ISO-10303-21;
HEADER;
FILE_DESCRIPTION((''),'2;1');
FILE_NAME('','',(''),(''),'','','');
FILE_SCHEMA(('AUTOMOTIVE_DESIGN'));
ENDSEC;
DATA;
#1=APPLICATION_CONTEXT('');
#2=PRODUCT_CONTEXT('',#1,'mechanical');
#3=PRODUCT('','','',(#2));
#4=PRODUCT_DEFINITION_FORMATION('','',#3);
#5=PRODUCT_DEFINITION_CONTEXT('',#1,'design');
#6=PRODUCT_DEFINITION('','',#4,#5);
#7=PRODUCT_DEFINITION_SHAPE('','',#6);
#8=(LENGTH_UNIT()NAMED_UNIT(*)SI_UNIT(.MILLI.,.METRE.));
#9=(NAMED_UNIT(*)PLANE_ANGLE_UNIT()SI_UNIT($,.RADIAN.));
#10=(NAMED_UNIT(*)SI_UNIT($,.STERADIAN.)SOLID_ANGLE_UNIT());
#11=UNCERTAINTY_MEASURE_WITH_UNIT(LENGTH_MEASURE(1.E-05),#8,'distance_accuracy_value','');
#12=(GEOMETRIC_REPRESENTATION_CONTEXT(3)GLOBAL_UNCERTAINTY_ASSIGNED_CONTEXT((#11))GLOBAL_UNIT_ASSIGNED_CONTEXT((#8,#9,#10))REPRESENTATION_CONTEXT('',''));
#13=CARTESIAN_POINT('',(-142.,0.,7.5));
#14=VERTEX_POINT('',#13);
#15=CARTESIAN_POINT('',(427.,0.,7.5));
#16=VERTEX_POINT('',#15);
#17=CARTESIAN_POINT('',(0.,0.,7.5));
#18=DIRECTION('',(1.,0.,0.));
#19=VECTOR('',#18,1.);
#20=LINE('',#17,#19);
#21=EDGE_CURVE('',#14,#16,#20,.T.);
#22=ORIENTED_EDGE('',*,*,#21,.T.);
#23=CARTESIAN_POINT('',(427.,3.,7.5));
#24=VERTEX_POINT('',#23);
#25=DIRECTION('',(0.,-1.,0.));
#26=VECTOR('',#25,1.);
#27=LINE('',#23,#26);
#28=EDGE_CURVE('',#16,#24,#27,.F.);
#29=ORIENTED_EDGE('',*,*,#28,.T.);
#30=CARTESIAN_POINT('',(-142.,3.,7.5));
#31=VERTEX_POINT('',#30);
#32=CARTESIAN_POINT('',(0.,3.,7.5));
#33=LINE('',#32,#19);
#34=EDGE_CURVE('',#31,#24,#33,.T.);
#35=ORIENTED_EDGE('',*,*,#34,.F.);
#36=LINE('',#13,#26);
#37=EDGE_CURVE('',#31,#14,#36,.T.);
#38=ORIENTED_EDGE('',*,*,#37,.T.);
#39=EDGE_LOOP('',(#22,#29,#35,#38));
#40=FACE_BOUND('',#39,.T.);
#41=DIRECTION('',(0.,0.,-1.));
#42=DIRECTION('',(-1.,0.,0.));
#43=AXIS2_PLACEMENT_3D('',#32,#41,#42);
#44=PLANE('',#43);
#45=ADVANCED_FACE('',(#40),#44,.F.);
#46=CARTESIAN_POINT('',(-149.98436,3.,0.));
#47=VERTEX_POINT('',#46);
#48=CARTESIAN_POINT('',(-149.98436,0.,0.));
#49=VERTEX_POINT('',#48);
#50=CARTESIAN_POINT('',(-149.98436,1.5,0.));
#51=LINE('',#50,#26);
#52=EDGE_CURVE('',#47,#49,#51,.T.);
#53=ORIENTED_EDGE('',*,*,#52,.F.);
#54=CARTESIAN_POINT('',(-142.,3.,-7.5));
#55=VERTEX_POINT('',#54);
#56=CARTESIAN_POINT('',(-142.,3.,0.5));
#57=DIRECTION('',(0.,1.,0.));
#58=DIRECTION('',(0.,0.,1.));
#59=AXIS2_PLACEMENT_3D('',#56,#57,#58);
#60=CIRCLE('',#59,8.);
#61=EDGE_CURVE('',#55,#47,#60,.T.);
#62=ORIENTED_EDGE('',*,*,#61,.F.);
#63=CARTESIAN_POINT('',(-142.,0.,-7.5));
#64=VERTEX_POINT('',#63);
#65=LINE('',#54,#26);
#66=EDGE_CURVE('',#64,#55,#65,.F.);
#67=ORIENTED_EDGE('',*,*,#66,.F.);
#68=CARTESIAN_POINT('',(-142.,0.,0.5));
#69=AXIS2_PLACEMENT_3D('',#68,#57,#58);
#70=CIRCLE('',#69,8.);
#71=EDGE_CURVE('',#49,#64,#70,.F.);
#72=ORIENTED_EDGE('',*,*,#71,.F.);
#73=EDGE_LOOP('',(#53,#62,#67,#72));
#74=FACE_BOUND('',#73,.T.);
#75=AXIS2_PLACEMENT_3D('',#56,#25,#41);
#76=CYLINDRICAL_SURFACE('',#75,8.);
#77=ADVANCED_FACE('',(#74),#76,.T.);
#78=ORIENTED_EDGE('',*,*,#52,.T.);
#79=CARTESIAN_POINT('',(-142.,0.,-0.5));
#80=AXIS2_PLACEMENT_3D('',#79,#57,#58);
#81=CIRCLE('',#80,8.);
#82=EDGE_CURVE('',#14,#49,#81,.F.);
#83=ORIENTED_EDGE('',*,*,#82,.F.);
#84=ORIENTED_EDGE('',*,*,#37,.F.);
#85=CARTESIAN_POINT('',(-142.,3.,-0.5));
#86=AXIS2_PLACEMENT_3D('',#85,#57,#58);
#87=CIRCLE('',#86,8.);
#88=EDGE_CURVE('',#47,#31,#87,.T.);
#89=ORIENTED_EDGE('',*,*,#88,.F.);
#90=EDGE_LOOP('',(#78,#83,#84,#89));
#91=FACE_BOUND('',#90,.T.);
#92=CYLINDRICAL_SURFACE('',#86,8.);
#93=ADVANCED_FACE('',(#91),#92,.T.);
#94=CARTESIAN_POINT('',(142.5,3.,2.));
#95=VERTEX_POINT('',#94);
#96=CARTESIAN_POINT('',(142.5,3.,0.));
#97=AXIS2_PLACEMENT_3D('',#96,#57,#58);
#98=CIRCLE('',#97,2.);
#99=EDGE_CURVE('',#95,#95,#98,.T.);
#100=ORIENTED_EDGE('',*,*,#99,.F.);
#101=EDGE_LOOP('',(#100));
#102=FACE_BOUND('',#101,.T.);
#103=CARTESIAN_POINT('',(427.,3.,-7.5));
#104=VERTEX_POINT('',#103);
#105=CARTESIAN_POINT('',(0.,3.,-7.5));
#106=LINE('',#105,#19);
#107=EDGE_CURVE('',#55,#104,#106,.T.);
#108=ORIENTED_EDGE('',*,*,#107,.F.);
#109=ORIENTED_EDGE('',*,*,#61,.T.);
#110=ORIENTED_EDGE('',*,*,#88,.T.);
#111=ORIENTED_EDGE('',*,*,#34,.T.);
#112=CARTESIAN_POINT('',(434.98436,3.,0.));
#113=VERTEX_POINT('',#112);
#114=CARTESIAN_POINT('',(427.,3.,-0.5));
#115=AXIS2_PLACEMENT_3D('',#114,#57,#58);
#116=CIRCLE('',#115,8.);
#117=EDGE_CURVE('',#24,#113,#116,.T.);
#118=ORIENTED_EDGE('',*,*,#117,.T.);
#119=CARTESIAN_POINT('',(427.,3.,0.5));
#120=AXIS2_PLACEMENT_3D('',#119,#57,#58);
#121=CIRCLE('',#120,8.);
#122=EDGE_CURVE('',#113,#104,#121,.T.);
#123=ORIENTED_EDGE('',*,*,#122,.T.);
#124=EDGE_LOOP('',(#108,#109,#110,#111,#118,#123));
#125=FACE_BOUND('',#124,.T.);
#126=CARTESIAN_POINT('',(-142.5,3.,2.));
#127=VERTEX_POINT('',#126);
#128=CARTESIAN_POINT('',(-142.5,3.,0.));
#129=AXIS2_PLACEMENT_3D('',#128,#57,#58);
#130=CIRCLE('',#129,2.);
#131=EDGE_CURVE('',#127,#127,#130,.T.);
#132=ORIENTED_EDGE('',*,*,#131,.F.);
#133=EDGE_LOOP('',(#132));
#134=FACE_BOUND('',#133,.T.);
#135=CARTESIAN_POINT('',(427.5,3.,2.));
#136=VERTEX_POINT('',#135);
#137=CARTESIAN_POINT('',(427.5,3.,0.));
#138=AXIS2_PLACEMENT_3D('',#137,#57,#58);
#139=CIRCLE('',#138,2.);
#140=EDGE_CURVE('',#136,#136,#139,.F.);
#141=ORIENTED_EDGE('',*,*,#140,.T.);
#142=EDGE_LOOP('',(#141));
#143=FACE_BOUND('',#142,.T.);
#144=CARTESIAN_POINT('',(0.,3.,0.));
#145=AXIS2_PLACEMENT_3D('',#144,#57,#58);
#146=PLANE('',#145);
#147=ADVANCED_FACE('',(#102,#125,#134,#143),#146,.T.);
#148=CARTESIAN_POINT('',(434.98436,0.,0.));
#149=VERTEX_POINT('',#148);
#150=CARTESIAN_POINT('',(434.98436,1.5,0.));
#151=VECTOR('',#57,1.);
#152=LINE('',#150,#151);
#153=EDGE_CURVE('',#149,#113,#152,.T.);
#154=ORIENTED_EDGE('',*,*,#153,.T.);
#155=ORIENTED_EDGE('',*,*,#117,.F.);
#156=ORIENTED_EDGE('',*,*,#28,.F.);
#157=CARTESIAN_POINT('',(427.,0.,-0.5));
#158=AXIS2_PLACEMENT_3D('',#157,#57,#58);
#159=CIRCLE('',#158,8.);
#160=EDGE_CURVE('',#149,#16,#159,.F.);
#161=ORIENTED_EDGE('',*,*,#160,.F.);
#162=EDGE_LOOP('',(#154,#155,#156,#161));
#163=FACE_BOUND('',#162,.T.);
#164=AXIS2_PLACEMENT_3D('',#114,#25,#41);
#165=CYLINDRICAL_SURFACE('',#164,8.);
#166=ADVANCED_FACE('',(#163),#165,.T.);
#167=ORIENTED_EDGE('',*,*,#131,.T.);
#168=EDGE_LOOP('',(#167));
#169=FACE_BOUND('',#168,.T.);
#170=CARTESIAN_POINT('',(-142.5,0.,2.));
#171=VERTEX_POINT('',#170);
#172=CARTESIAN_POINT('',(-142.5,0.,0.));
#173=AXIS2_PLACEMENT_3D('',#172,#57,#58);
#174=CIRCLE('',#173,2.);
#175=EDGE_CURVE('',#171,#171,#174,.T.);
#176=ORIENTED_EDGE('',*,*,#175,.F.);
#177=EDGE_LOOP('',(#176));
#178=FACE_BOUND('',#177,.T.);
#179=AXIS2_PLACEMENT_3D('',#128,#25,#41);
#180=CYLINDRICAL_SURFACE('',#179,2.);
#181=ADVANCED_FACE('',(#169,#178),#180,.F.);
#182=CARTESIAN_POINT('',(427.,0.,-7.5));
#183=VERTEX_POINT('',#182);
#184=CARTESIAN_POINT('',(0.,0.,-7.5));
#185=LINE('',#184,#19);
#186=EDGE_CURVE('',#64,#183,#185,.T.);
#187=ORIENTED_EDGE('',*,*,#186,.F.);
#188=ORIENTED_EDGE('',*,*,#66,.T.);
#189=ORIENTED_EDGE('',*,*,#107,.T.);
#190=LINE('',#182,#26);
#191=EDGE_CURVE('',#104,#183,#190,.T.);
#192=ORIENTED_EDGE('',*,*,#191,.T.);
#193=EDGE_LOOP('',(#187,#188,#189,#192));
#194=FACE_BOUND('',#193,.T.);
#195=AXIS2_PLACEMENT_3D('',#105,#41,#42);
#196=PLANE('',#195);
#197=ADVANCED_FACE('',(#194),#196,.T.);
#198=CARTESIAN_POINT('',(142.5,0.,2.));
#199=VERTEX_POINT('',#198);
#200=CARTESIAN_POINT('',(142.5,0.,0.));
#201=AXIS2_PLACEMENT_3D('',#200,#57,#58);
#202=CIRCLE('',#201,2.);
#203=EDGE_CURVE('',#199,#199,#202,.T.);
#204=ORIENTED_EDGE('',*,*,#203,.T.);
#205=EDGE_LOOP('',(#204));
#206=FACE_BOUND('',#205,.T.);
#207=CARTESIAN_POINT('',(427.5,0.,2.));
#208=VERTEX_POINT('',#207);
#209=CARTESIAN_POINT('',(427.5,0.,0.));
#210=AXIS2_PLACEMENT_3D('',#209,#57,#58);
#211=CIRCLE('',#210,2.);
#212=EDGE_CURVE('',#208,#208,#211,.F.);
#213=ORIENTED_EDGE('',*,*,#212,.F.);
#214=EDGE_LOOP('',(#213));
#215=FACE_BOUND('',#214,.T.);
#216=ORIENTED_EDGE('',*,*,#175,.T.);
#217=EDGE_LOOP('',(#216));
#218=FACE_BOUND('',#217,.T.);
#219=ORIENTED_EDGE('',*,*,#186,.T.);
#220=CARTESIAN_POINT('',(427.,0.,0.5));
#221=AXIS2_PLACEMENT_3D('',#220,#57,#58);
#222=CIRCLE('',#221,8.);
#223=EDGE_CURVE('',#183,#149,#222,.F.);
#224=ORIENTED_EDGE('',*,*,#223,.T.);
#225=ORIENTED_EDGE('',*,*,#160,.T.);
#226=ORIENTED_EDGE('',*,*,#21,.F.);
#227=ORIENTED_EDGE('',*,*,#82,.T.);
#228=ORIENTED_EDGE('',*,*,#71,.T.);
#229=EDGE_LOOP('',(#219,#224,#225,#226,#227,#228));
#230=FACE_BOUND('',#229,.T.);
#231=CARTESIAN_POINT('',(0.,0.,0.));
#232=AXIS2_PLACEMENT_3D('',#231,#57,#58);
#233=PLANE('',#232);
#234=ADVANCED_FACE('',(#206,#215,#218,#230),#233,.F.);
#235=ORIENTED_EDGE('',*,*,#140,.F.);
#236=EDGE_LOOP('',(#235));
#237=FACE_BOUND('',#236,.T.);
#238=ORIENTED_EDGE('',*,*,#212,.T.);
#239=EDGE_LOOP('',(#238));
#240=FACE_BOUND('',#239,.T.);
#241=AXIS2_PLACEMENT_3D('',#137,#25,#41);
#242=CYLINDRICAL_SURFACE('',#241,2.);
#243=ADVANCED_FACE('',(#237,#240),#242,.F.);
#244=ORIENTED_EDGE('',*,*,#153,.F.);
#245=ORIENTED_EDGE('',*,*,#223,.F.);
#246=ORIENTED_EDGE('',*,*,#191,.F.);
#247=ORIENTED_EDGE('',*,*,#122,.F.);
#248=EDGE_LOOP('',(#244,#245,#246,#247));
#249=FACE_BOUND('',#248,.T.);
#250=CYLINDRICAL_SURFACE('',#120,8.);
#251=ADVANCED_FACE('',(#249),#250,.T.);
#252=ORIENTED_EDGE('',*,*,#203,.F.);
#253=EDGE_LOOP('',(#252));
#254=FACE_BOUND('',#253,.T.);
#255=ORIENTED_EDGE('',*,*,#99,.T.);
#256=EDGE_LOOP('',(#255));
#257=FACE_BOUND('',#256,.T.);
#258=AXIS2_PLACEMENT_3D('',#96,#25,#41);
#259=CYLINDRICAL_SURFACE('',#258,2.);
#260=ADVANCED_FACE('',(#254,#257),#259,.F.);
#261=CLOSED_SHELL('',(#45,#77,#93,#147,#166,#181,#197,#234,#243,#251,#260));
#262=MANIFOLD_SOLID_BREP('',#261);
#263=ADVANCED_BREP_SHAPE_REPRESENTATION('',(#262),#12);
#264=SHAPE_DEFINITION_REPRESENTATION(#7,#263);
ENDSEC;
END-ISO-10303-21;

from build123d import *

# Parameters (mm, degrees)
SKETCH1_W           = 285
SKETCH1_H           = 15
SKETCH1_R           = 2
SKETCH1_W_2         = 15
BOSS_EXTRUDE1_DEPTH = 3
FILLET1_R           = 8


with BuildPart() as part:
    # Sketch1 → Boss-Extrude1 (new body)
    # profile 1 of 3: a face of its own
    with BuildSketch(Plane(origin=(0, 0, 0), x_dir=(1, 0, 0), z_dir=(0, 1, 0))):
        with Locations((-7.5, 0)):
            Rectangle(SKETCH1_W, SKETCH1_H)
        with Locations(Location((-142.5, 0, 0), (0, 0, 270))):
            Circle(SKETCH1_R, mode=Mode.SUBTRACT)
    # profile 2 of 3: a face of its own
    with BuildSketch(Plane(origin=(0, 0, 0), x_dir=(1, 0, 0), z_dir=(0, 1, 0))):
        with Locations((292.5, 0)):
            Rectangle(SKETCH1_W, SKETCH1_H)
        with Locations(Location((427.5, 0, 0), (0, 0, 270))):
            Circle(SKETCH1_R, mode=Mode.SUBTRACT)
    # profile 3 of 3: a face of its own
    with BuildSketch(Plane(origin=(0, 0, 0), x_dir=(1, 0, 0), z_dir=(0, 1, 0))):
        with Locations((142.5, 0)):
            Rectangle(SKETCH1_W_2, SKETCH1_H)
        with Locations(Location((142.5, 0, 0), (0, 0, 270))):
            Circle(SKETCH1_R, mode=Mode.SUBTRACT)
    extrude(amount=BOSS_EXTRUDE1_DEPTH)

    # Fillet1
    # the kernel refuses this fillet: 8 mm, written as the material it takes off along each edge
    with BuildSketch(Plane(origin=(-150, -20, 7.5), x_dir=(1, 0, 0), z_dir=(0, 1, 0)), Plane(origin=(435, -20, -7.5), x_dir=(-1, 0, 0), z_dir=(0, 1, 0))) as fillet1_piece_1:
        with BuildLine():
            CenterArc((FILLET1_R, FILLET1_R), FILLET1_R, 180, 90)
            Line((0, FILLET1_R), (0, 0))
            Line((0, 0), (FILLET1_R, 0))
        make_face()
    extrude(amount=43, mode=Mode.SUBTRACT)
    with BuildSketch(Plane(origin=(-150, -20, -7.5), x_dir=(1, 0, 0), z_dir=(0, 1, 0)), Plane(origin=(435, -20, 7.5), x_dir=(-1, 0, 0), z_dir=(0, 1, 0))) as fillet1_piece_2:
        with BuildLine():
            CenterArc((FILLET1_R, -FILLET1_R), FILLET1_R, 90, 90)
            Line((0, -FILLET1_R), (0, 0))
            Line((0, 0), (FILLET1_R, 0))
        make_face()
    extrude(amount=43, mode=Mode.SUBTRACT)


solid = part.part
